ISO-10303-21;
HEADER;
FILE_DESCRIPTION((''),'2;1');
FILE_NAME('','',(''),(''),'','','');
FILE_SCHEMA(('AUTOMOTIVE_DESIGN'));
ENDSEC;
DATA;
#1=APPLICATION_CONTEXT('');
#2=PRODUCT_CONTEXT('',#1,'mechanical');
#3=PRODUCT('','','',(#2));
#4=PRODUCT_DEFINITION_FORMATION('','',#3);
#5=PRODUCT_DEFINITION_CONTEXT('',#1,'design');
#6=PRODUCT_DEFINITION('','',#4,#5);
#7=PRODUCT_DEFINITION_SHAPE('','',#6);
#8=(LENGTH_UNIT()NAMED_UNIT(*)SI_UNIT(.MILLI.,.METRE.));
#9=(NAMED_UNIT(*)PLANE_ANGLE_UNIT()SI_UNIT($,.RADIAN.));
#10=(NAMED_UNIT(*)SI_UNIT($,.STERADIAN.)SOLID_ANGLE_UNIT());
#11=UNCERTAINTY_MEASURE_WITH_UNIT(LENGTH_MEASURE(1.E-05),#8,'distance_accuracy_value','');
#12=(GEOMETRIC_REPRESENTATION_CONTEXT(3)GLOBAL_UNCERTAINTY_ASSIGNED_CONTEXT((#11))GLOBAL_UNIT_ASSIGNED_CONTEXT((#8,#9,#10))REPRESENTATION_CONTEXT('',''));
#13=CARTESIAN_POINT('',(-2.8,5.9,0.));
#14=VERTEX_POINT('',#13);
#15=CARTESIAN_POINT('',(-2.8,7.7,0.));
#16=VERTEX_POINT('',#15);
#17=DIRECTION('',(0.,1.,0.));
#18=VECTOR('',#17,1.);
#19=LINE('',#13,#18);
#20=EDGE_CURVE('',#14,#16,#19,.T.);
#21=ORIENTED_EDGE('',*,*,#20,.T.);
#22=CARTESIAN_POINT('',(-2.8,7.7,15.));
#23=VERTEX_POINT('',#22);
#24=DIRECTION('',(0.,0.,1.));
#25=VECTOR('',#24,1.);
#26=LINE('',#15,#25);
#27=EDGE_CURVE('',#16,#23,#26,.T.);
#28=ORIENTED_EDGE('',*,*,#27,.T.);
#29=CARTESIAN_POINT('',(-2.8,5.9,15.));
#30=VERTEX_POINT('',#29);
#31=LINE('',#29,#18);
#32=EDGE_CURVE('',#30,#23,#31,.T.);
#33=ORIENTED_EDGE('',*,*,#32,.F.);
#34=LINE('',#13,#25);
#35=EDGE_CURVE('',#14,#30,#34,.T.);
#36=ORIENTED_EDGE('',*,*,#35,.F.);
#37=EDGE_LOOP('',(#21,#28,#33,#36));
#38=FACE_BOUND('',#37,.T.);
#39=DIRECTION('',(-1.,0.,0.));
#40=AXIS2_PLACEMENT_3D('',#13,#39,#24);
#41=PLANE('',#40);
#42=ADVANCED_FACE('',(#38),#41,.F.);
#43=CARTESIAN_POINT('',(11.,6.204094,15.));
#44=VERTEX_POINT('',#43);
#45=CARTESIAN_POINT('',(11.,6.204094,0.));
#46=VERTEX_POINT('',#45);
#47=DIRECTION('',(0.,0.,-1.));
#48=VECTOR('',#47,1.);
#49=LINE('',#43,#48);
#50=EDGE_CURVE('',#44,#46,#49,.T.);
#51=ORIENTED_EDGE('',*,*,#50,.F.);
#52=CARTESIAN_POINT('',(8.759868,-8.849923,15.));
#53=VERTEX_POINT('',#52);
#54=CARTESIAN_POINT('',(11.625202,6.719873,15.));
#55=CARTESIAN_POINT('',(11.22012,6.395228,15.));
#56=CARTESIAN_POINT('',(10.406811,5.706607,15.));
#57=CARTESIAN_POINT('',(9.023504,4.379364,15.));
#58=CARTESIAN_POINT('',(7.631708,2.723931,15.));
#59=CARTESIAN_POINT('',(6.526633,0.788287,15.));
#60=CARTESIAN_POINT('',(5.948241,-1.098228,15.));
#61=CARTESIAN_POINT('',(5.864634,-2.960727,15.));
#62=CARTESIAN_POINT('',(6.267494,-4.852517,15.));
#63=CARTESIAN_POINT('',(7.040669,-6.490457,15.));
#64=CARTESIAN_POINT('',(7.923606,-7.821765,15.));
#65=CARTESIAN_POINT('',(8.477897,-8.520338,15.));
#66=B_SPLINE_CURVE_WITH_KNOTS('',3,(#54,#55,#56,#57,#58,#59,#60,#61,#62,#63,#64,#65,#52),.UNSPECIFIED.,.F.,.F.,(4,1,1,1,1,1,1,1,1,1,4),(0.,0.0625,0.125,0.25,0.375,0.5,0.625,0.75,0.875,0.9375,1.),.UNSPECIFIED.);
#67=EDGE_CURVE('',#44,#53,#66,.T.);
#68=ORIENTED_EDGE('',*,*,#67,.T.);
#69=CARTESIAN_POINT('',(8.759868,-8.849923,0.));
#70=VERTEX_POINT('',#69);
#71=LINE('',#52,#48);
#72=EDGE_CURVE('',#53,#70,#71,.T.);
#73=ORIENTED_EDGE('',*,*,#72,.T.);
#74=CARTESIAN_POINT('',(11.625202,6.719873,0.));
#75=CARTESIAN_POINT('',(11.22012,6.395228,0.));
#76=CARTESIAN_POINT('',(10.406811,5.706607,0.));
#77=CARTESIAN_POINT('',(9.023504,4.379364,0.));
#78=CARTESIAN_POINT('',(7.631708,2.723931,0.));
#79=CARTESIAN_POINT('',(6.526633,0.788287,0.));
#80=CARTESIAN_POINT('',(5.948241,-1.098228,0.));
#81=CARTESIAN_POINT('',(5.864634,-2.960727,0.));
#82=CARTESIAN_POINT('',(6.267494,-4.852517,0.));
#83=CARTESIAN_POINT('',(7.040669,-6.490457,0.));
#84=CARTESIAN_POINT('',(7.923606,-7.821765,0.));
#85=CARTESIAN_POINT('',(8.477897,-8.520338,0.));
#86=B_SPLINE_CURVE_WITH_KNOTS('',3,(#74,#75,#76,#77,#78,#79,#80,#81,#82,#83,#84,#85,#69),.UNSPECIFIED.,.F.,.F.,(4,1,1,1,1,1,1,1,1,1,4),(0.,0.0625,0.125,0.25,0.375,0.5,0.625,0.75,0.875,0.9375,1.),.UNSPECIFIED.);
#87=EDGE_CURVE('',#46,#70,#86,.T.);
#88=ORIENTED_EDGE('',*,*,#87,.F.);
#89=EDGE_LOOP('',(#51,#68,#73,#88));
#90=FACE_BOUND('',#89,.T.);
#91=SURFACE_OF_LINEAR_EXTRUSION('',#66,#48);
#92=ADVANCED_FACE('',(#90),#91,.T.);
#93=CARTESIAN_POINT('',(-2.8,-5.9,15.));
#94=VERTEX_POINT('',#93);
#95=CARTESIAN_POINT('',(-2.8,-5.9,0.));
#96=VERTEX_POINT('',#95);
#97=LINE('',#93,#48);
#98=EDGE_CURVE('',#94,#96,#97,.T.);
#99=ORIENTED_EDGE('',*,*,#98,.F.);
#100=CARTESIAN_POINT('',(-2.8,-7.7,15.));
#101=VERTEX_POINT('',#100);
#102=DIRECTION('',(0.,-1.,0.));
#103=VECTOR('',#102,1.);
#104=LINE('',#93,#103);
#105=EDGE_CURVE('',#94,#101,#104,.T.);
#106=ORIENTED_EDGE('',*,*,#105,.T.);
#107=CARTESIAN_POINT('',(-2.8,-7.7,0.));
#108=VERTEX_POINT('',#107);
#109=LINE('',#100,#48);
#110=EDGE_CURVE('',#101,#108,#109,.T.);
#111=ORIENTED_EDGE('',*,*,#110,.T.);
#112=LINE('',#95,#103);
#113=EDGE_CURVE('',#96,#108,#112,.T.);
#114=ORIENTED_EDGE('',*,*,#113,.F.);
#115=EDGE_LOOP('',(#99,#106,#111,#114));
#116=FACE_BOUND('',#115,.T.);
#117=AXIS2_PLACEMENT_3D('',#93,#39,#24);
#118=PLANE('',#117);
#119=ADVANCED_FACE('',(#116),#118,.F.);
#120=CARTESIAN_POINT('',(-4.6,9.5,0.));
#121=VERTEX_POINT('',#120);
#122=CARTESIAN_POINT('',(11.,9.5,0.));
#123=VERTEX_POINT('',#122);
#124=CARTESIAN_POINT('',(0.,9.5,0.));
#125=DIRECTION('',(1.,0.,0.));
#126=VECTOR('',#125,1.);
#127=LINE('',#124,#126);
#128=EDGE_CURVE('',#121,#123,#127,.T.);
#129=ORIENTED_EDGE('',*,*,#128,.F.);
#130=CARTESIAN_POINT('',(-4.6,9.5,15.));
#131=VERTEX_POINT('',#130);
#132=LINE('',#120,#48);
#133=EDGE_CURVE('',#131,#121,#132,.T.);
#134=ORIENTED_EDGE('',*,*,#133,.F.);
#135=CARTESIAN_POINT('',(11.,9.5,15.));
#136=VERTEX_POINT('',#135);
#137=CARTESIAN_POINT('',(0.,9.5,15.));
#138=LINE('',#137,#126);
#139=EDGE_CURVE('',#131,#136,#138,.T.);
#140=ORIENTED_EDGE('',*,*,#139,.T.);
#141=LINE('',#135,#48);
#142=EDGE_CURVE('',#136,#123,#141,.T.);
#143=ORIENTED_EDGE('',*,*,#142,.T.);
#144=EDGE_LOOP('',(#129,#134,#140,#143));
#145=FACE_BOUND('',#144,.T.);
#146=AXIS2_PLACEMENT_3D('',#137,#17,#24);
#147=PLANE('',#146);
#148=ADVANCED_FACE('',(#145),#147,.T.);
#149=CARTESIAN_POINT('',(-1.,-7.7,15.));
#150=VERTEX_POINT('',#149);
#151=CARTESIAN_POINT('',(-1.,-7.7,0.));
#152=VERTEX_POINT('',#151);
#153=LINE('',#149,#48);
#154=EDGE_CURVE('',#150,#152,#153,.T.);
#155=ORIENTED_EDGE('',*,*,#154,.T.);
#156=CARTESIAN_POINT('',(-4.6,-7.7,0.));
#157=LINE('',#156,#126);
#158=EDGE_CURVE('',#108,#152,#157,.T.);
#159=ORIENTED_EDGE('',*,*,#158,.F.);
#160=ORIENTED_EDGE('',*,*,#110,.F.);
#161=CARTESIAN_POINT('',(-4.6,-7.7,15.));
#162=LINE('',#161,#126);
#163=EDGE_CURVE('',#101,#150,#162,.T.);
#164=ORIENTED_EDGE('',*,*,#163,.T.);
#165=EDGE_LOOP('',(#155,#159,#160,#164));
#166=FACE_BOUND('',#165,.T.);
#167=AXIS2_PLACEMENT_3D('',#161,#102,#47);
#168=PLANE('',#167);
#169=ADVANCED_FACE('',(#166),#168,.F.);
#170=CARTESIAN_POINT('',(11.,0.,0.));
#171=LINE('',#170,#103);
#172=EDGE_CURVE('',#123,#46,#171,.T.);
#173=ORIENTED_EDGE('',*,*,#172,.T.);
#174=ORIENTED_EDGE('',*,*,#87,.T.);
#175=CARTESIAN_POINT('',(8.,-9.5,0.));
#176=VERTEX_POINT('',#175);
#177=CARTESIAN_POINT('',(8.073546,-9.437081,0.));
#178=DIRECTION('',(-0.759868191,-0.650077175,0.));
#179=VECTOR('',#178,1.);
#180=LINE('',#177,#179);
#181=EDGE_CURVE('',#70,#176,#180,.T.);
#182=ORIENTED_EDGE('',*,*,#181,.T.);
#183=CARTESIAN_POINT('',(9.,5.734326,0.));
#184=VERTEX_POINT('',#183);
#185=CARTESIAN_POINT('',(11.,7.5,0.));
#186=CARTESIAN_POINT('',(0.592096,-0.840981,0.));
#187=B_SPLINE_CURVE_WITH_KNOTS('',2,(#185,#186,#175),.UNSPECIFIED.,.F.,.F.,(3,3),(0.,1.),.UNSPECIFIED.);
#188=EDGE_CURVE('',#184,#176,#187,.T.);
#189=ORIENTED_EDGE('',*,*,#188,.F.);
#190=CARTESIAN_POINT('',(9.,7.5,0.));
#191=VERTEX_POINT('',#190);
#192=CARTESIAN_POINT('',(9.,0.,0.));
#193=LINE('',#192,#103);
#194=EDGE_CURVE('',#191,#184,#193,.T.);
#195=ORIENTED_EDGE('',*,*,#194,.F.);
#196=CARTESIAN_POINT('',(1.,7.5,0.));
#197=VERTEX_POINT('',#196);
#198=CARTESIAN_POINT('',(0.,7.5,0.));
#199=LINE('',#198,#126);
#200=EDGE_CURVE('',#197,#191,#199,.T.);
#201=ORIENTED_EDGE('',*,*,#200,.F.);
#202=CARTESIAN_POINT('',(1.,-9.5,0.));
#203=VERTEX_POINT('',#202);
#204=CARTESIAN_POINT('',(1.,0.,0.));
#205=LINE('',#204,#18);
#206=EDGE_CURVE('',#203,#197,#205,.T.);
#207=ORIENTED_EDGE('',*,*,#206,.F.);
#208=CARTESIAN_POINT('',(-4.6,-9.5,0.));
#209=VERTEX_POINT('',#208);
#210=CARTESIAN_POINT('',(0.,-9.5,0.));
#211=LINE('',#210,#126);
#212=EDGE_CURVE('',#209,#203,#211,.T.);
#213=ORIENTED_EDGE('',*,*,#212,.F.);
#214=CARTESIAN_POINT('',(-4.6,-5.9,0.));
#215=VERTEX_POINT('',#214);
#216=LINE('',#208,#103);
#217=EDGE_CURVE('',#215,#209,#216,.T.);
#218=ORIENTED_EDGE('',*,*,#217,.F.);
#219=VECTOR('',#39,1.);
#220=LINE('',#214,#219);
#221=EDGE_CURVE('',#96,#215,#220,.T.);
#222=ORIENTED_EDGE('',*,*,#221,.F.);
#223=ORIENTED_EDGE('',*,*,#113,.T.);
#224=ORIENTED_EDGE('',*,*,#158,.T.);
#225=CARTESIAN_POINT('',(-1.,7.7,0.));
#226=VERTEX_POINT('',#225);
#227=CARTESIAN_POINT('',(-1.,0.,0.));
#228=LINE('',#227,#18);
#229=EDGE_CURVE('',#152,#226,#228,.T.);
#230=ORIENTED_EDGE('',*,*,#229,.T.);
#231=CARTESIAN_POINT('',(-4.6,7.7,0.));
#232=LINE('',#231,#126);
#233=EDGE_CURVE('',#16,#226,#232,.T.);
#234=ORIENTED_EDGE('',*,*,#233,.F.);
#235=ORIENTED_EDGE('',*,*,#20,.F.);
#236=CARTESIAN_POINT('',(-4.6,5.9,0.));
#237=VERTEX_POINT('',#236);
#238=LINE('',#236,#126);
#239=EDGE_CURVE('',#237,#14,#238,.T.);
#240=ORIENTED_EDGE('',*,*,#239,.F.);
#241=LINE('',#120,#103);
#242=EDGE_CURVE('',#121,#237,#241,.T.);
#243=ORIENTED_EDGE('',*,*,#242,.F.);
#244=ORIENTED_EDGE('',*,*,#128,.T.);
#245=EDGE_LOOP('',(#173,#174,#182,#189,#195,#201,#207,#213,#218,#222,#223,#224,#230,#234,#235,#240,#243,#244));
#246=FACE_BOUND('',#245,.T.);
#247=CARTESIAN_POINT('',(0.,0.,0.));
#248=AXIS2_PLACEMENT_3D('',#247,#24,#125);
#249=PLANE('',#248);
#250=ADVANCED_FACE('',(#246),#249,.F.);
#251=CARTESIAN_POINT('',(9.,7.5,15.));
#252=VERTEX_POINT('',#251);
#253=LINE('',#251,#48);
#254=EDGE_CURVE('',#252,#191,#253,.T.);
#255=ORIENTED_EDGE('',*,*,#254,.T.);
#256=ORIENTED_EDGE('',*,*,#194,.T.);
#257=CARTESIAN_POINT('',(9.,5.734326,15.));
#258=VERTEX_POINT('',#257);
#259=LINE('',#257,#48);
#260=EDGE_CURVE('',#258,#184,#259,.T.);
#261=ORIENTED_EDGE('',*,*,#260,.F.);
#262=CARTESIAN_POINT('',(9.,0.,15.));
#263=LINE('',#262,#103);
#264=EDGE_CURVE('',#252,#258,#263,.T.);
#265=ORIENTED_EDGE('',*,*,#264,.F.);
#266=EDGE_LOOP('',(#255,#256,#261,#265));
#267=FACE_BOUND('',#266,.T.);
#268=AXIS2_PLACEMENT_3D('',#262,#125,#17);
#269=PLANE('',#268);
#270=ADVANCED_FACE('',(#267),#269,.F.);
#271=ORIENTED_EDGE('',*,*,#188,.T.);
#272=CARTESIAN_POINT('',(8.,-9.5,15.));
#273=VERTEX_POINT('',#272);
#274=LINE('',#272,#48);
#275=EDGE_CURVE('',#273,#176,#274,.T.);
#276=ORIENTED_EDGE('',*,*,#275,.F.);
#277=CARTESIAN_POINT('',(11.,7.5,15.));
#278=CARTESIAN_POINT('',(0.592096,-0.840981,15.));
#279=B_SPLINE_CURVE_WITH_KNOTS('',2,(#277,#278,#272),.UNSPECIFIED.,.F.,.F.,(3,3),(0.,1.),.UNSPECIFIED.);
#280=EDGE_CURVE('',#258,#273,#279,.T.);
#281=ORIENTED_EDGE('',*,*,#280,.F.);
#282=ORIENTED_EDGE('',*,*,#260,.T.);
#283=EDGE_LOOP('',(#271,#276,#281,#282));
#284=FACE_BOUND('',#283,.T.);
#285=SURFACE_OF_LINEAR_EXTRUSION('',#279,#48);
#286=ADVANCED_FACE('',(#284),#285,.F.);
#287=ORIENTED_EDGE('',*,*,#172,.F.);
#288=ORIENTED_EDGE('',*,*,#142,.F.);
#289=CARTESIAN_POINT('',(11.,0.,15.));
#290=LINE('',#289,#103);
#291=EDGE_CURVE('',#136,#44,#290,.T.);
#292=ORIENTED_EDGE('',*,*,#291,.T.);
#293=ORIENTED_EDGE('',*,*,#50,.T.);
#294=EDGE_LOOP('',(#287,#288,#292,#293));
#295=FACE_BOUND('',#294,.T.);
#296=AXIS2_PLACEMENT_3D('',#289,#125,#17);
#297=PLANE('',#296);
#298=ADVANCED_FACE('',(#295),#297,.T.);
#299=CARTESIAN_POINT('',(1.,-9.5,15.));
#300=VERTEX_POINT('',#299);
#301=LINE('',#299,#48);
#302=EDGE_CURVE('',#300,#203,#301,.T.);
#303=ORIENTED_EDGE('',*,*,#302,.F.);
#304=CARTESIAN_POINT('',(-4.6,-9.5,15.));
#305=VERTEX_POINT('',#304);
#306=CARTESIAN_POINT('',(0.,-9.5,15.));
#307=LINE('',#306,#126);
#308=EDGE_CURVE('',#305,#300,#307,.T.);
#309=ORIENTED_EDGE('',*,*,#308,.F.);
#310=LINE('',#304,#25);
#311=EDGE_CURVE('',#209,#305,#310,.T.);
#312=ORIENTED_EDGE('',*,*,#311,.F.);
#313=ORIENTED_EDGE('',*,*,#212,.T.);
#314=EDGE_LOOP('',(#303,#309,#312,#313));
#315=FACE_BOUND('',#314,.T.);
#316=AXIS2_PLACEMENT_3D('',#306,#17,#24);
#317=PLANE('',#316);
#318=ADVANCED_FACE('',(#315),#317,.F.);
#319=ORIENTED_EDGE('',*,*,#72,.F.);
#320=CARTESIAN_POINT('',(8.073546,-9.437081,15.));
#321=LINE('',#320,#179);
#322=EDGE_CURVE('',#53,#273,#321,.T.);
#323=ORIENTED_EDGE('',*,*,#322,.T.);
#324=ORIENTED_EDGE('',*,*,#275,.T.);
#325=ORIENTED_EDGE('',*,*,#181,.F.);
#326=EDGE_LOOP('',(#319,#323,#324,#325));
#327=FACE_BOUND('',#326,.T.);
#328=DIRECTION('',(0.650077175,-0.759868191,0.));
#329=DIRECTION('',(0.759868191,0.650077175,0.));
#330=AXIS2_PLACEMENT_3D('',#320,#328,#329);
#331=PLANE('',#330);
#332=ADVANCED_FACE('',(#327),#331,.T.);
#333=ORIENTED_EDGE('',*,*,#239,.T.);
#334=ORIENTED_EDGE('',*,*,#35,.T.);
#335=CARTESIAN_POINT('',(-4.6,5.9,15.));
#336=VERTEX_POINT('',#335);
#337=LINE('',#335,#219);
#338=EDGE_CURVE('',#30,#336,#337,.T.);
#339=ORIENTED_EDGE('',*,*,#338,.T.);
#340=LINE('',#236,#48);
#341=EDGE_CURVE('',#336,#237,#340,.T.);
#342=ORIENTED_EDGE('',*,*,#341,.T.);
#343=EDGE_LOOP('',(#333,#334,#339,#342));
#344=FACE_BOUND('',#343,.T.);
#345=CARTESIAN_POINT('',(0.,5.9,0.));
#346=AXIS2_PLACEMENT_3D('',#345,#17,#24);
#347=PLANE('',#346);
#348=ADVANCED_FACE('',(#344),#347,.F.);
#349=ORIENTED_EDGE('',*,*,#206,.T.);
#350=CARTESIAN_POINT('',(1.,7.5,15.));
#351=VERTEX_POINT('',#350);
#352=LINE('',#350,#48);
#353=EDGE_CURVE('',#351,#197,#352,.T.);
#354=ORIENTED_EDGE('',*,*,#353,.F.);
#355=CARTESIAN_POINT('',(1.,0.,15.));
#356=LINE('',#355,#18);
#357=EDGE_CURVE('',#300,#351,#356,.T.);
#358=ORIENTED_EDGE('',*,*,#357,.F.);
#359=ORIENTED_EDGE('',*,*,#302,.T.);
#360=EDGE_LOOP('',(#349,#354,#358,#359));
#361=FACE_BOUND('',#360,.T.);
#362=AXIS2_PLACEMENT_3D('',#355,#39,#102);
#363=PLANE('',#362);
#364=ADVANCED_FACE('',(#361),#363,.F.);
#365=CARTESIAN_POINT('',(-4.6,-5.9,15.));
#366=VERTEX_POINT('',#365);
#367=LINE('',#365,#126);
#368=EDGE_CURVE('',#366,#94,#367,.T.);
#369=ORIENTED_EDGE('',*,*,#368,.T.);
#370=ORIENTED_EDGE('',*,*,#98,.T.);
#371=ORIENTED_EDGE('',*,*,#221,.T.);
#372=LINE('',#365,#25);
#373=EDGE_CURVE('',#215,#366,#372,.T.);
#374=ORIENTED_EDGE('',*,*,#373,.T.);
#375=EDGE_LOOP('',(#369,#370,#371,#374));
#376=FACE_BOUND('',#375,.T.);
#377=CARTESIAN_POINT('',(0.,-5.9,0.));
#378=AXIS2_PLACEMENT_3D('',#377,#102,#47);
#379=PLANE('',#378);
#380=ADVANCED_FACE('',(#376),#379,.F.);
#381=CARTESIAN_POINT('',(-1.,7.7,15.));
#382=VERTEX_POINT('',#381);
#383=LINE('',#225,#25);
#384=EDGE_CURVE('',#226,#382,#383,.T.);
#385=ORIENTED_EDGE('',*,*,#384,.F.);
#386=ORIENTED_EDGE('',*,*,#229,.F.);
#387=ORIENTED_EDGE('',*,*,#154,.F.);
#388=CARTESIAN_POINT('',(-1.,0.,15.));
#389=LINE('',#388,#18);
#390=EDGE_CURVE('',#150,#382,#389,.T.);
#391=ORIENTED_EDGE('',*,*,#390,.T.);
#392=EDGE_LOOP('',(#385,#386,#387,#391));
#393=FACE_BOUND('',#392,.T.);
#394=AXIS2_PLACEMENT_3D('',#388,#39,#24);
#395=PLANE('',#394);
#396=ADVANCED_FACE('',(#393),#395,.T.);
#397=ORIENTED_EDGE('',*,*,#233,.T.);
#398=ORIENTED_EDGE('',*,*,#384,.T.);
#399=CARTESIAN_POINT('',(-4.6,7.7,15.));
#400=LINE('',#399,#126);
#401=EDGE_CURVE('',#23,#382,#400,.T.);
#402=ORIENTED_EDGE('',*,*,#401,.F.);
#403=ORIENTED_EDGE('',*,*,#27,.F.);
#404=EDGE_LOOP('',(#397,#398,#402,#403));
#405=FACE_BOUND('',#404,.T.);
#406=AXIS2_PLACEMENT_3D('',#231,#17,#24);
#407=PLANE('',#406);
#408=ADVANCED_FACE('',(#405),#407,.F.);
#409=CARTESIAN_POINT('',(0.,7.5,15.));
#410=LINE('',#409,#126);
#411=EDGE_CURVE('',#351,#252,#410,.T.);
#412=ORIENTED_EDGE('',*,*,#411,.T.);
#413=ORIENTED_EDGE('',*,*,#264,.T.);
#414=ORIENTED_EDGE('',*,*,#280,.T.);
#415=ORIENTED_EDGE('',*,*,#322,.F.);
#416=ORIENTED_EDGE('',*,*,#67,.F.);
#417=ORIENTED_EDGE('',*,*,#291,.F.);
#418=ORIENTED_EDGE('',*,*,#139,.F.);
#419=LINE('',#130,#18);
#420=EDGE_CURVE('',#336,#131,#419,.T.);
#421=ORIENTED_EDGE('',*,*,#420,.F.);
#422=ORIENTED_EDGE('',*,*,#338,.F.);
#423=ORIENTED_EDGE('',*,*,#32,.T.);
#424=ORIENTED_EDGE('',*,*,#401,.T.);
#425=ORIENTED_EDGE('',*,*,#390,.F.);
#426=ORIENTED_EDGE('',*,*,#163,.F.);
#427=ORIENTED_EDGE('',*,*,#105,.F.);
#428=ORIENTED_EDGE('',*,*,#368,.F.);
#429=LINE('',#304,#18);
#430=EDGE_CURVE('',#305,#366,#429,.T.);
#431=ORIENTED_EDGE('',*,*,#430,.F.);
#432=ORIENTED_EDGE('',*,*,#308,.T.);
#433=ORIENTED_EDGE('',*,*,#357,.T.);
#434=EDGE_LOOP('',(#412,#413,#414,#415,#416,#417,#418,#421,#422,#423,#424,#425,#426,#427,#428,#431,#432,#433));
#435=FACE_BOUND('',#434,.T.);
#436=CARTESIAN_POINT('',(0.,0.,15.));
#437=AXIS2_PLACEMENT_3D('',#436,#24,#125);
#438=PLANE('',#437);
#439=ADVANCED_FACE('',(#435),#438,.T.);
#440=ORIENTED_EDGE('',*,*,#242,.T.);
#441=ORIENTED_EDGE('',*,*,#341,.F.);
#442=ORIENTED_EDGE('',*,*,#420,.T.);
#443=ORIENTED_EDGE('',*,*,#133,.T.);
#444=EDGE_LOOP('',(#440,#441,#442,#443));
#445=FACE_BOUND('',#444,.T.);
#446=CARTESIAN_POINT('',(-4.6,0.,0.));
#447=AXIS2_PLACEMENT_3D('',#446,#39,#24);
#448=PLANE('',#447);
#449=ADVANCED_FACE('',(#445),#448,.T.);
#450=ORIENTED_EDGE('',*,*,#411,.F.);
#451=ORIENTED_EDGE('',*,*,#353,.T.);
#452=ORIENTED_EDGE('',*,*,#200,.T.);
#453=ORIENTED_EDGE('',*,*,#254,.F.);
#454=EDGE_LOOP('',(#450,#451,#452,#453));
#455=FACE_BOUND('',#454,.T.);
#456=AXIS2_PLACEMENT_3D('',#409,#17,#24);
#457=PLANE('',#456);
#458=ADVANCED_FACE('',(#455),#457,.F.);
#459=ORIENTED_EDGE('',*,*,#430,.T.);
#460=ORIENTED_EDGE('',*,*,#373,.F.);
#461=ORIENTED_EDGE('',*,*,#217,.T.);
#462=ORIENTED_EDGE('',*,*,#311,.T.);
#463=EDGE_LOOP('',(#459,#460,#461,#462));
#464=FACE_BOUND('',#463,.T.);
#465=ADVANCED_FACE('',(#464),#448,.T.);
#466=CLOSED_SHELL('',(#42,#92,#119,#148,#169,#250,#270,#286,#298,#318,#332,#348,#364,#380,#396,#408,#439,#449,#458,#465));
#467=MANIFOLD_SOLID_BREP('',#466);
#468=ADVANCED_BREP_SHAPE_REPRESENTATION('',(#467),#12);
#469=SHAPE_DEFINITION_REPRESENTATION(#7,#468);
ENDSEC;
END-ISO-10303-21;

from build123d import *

# Parameters (mm, degrees)
AUFSATZ_LINEAR_AUSTRAGEN1_DEPTH = 15
SKIZZE8_W                       = 15
SKIZZE8_H                       = 1.8
AUFSATZ_LINEAR_AUSTRAGEN2_DEPTH = 3.6
SKIZZE9_W                       = 1.8
SKIZZE9_H                       = 15
AUFSATZ_LINEAR_AUSTRAGEN3_DEPTH = 1.8
SKIZZE10_W                      = 1.8
SKIZZE10_H                      = 15
AUFSATZ_LINEAR_AUSTRAGEN4_DEPTH = 1.8


# Read off the part's stored shape, not the designer's step: Aufsatz-Linear austragen1
with BuildPart() as part:
    # Aufsatz-Linear austragen1 outline → Aufsatz-Linear austragen1 (new body)
    with BuildSketch(Plane.XY):
        with BuildLine():
            Line((9, 7.5), (9, 5.734326374))
            add(Edge.make_bspline(
                [(9, 5.734326374), (1.374597046, -1.755638023), (8, -9.5)],
                knots=[0.105630562, 0.105630562, 0.105630562, 1, 1, 1], degree=2))
            Line((8, -9.5), (8.759868191, -8.849922825))
            add(Edge.make_bspline(
                [(11, 6.204093636), (10.807716783, 6.040836357), (10.227995606, 5.535038651), (9.02350357, 4.379363864), (7.631707894, 2.723931214), (6.526632736, 0.788286781), (5.948241105, -1.098227765), (5.864634496, -2.960727349), (6.26749431, -4.852517338), (7.040668693, -6.490456848), (7.923606451, -7.821764954), (8.477896684, -8.52033768), (8.759868191, -8.849922825)],
                knots=[0.032316638, 0.032316638, 0.032316638, 0.032316638, 0.0625, 0.125, 0.25, 0.375, 0.5, 0.625, 0.75, 0.875, 0.9375, 1, 1, 1, 1], degree=3))
            Line((11, 6.204093636), (11, 9.5))
            Line((11, 9.5), (-1, 9.5))
            Line((-1, 9.5), (-1, -9.5))
            Line((-1, -9.5), (1, -9.5))
            Line((1, -9.5), (1, 7.5))
            Line((1, 7.5), (9, 7.5))
        make_face()
    extrude(amount=AUFSATZ_LINEAR_AUSTRAGEN1_DEPTH)

    # Skizze8 → Aufsatz-Linear austragen2 (add)
    with BuildSketch(Plane.ZY.offset(1)):
        with Locations((7.5, 8.6)):
            Rectangle(SKIZZE8_W, SKIZZE8_H)
        with Locations((7.5, -8.6)):
            Rectangle(SKIZZE8_W, SKIZZE8_H)
    extrude(amount=AUFSATZ_LINEAR_AUSTRAGEN2_DEPTH)

    # Skizze9 → Aufsatz-Linear austragen3 (add)
    with BuildSketch(Plane(origin=(0, -7.7, 0), x_dir=(1, 0, 0), z_dir=(0, 1, 0))):
        with Locations((-3.7, -7.5)):
            Rectangle(SKIZZE9_W, SKIZZE9_H)
    extrude(amount=AUFSATZ_LINEAR_AUSTRAGEN3_DEPTH)

    # Skizze10 → Aufsatz-Linear austragen4 (add)
    with BuildSketch(Plane.XZ.offset(-7.7)):
        with Locations((-3.7, 7.5)):
            Rectangle(SKIZZE10_W, SKIZZE10_H)
    extrude(amount=AUFSATZ_LINEAR_AUSTRAGEN4_DEPTH)


solid = part.part
